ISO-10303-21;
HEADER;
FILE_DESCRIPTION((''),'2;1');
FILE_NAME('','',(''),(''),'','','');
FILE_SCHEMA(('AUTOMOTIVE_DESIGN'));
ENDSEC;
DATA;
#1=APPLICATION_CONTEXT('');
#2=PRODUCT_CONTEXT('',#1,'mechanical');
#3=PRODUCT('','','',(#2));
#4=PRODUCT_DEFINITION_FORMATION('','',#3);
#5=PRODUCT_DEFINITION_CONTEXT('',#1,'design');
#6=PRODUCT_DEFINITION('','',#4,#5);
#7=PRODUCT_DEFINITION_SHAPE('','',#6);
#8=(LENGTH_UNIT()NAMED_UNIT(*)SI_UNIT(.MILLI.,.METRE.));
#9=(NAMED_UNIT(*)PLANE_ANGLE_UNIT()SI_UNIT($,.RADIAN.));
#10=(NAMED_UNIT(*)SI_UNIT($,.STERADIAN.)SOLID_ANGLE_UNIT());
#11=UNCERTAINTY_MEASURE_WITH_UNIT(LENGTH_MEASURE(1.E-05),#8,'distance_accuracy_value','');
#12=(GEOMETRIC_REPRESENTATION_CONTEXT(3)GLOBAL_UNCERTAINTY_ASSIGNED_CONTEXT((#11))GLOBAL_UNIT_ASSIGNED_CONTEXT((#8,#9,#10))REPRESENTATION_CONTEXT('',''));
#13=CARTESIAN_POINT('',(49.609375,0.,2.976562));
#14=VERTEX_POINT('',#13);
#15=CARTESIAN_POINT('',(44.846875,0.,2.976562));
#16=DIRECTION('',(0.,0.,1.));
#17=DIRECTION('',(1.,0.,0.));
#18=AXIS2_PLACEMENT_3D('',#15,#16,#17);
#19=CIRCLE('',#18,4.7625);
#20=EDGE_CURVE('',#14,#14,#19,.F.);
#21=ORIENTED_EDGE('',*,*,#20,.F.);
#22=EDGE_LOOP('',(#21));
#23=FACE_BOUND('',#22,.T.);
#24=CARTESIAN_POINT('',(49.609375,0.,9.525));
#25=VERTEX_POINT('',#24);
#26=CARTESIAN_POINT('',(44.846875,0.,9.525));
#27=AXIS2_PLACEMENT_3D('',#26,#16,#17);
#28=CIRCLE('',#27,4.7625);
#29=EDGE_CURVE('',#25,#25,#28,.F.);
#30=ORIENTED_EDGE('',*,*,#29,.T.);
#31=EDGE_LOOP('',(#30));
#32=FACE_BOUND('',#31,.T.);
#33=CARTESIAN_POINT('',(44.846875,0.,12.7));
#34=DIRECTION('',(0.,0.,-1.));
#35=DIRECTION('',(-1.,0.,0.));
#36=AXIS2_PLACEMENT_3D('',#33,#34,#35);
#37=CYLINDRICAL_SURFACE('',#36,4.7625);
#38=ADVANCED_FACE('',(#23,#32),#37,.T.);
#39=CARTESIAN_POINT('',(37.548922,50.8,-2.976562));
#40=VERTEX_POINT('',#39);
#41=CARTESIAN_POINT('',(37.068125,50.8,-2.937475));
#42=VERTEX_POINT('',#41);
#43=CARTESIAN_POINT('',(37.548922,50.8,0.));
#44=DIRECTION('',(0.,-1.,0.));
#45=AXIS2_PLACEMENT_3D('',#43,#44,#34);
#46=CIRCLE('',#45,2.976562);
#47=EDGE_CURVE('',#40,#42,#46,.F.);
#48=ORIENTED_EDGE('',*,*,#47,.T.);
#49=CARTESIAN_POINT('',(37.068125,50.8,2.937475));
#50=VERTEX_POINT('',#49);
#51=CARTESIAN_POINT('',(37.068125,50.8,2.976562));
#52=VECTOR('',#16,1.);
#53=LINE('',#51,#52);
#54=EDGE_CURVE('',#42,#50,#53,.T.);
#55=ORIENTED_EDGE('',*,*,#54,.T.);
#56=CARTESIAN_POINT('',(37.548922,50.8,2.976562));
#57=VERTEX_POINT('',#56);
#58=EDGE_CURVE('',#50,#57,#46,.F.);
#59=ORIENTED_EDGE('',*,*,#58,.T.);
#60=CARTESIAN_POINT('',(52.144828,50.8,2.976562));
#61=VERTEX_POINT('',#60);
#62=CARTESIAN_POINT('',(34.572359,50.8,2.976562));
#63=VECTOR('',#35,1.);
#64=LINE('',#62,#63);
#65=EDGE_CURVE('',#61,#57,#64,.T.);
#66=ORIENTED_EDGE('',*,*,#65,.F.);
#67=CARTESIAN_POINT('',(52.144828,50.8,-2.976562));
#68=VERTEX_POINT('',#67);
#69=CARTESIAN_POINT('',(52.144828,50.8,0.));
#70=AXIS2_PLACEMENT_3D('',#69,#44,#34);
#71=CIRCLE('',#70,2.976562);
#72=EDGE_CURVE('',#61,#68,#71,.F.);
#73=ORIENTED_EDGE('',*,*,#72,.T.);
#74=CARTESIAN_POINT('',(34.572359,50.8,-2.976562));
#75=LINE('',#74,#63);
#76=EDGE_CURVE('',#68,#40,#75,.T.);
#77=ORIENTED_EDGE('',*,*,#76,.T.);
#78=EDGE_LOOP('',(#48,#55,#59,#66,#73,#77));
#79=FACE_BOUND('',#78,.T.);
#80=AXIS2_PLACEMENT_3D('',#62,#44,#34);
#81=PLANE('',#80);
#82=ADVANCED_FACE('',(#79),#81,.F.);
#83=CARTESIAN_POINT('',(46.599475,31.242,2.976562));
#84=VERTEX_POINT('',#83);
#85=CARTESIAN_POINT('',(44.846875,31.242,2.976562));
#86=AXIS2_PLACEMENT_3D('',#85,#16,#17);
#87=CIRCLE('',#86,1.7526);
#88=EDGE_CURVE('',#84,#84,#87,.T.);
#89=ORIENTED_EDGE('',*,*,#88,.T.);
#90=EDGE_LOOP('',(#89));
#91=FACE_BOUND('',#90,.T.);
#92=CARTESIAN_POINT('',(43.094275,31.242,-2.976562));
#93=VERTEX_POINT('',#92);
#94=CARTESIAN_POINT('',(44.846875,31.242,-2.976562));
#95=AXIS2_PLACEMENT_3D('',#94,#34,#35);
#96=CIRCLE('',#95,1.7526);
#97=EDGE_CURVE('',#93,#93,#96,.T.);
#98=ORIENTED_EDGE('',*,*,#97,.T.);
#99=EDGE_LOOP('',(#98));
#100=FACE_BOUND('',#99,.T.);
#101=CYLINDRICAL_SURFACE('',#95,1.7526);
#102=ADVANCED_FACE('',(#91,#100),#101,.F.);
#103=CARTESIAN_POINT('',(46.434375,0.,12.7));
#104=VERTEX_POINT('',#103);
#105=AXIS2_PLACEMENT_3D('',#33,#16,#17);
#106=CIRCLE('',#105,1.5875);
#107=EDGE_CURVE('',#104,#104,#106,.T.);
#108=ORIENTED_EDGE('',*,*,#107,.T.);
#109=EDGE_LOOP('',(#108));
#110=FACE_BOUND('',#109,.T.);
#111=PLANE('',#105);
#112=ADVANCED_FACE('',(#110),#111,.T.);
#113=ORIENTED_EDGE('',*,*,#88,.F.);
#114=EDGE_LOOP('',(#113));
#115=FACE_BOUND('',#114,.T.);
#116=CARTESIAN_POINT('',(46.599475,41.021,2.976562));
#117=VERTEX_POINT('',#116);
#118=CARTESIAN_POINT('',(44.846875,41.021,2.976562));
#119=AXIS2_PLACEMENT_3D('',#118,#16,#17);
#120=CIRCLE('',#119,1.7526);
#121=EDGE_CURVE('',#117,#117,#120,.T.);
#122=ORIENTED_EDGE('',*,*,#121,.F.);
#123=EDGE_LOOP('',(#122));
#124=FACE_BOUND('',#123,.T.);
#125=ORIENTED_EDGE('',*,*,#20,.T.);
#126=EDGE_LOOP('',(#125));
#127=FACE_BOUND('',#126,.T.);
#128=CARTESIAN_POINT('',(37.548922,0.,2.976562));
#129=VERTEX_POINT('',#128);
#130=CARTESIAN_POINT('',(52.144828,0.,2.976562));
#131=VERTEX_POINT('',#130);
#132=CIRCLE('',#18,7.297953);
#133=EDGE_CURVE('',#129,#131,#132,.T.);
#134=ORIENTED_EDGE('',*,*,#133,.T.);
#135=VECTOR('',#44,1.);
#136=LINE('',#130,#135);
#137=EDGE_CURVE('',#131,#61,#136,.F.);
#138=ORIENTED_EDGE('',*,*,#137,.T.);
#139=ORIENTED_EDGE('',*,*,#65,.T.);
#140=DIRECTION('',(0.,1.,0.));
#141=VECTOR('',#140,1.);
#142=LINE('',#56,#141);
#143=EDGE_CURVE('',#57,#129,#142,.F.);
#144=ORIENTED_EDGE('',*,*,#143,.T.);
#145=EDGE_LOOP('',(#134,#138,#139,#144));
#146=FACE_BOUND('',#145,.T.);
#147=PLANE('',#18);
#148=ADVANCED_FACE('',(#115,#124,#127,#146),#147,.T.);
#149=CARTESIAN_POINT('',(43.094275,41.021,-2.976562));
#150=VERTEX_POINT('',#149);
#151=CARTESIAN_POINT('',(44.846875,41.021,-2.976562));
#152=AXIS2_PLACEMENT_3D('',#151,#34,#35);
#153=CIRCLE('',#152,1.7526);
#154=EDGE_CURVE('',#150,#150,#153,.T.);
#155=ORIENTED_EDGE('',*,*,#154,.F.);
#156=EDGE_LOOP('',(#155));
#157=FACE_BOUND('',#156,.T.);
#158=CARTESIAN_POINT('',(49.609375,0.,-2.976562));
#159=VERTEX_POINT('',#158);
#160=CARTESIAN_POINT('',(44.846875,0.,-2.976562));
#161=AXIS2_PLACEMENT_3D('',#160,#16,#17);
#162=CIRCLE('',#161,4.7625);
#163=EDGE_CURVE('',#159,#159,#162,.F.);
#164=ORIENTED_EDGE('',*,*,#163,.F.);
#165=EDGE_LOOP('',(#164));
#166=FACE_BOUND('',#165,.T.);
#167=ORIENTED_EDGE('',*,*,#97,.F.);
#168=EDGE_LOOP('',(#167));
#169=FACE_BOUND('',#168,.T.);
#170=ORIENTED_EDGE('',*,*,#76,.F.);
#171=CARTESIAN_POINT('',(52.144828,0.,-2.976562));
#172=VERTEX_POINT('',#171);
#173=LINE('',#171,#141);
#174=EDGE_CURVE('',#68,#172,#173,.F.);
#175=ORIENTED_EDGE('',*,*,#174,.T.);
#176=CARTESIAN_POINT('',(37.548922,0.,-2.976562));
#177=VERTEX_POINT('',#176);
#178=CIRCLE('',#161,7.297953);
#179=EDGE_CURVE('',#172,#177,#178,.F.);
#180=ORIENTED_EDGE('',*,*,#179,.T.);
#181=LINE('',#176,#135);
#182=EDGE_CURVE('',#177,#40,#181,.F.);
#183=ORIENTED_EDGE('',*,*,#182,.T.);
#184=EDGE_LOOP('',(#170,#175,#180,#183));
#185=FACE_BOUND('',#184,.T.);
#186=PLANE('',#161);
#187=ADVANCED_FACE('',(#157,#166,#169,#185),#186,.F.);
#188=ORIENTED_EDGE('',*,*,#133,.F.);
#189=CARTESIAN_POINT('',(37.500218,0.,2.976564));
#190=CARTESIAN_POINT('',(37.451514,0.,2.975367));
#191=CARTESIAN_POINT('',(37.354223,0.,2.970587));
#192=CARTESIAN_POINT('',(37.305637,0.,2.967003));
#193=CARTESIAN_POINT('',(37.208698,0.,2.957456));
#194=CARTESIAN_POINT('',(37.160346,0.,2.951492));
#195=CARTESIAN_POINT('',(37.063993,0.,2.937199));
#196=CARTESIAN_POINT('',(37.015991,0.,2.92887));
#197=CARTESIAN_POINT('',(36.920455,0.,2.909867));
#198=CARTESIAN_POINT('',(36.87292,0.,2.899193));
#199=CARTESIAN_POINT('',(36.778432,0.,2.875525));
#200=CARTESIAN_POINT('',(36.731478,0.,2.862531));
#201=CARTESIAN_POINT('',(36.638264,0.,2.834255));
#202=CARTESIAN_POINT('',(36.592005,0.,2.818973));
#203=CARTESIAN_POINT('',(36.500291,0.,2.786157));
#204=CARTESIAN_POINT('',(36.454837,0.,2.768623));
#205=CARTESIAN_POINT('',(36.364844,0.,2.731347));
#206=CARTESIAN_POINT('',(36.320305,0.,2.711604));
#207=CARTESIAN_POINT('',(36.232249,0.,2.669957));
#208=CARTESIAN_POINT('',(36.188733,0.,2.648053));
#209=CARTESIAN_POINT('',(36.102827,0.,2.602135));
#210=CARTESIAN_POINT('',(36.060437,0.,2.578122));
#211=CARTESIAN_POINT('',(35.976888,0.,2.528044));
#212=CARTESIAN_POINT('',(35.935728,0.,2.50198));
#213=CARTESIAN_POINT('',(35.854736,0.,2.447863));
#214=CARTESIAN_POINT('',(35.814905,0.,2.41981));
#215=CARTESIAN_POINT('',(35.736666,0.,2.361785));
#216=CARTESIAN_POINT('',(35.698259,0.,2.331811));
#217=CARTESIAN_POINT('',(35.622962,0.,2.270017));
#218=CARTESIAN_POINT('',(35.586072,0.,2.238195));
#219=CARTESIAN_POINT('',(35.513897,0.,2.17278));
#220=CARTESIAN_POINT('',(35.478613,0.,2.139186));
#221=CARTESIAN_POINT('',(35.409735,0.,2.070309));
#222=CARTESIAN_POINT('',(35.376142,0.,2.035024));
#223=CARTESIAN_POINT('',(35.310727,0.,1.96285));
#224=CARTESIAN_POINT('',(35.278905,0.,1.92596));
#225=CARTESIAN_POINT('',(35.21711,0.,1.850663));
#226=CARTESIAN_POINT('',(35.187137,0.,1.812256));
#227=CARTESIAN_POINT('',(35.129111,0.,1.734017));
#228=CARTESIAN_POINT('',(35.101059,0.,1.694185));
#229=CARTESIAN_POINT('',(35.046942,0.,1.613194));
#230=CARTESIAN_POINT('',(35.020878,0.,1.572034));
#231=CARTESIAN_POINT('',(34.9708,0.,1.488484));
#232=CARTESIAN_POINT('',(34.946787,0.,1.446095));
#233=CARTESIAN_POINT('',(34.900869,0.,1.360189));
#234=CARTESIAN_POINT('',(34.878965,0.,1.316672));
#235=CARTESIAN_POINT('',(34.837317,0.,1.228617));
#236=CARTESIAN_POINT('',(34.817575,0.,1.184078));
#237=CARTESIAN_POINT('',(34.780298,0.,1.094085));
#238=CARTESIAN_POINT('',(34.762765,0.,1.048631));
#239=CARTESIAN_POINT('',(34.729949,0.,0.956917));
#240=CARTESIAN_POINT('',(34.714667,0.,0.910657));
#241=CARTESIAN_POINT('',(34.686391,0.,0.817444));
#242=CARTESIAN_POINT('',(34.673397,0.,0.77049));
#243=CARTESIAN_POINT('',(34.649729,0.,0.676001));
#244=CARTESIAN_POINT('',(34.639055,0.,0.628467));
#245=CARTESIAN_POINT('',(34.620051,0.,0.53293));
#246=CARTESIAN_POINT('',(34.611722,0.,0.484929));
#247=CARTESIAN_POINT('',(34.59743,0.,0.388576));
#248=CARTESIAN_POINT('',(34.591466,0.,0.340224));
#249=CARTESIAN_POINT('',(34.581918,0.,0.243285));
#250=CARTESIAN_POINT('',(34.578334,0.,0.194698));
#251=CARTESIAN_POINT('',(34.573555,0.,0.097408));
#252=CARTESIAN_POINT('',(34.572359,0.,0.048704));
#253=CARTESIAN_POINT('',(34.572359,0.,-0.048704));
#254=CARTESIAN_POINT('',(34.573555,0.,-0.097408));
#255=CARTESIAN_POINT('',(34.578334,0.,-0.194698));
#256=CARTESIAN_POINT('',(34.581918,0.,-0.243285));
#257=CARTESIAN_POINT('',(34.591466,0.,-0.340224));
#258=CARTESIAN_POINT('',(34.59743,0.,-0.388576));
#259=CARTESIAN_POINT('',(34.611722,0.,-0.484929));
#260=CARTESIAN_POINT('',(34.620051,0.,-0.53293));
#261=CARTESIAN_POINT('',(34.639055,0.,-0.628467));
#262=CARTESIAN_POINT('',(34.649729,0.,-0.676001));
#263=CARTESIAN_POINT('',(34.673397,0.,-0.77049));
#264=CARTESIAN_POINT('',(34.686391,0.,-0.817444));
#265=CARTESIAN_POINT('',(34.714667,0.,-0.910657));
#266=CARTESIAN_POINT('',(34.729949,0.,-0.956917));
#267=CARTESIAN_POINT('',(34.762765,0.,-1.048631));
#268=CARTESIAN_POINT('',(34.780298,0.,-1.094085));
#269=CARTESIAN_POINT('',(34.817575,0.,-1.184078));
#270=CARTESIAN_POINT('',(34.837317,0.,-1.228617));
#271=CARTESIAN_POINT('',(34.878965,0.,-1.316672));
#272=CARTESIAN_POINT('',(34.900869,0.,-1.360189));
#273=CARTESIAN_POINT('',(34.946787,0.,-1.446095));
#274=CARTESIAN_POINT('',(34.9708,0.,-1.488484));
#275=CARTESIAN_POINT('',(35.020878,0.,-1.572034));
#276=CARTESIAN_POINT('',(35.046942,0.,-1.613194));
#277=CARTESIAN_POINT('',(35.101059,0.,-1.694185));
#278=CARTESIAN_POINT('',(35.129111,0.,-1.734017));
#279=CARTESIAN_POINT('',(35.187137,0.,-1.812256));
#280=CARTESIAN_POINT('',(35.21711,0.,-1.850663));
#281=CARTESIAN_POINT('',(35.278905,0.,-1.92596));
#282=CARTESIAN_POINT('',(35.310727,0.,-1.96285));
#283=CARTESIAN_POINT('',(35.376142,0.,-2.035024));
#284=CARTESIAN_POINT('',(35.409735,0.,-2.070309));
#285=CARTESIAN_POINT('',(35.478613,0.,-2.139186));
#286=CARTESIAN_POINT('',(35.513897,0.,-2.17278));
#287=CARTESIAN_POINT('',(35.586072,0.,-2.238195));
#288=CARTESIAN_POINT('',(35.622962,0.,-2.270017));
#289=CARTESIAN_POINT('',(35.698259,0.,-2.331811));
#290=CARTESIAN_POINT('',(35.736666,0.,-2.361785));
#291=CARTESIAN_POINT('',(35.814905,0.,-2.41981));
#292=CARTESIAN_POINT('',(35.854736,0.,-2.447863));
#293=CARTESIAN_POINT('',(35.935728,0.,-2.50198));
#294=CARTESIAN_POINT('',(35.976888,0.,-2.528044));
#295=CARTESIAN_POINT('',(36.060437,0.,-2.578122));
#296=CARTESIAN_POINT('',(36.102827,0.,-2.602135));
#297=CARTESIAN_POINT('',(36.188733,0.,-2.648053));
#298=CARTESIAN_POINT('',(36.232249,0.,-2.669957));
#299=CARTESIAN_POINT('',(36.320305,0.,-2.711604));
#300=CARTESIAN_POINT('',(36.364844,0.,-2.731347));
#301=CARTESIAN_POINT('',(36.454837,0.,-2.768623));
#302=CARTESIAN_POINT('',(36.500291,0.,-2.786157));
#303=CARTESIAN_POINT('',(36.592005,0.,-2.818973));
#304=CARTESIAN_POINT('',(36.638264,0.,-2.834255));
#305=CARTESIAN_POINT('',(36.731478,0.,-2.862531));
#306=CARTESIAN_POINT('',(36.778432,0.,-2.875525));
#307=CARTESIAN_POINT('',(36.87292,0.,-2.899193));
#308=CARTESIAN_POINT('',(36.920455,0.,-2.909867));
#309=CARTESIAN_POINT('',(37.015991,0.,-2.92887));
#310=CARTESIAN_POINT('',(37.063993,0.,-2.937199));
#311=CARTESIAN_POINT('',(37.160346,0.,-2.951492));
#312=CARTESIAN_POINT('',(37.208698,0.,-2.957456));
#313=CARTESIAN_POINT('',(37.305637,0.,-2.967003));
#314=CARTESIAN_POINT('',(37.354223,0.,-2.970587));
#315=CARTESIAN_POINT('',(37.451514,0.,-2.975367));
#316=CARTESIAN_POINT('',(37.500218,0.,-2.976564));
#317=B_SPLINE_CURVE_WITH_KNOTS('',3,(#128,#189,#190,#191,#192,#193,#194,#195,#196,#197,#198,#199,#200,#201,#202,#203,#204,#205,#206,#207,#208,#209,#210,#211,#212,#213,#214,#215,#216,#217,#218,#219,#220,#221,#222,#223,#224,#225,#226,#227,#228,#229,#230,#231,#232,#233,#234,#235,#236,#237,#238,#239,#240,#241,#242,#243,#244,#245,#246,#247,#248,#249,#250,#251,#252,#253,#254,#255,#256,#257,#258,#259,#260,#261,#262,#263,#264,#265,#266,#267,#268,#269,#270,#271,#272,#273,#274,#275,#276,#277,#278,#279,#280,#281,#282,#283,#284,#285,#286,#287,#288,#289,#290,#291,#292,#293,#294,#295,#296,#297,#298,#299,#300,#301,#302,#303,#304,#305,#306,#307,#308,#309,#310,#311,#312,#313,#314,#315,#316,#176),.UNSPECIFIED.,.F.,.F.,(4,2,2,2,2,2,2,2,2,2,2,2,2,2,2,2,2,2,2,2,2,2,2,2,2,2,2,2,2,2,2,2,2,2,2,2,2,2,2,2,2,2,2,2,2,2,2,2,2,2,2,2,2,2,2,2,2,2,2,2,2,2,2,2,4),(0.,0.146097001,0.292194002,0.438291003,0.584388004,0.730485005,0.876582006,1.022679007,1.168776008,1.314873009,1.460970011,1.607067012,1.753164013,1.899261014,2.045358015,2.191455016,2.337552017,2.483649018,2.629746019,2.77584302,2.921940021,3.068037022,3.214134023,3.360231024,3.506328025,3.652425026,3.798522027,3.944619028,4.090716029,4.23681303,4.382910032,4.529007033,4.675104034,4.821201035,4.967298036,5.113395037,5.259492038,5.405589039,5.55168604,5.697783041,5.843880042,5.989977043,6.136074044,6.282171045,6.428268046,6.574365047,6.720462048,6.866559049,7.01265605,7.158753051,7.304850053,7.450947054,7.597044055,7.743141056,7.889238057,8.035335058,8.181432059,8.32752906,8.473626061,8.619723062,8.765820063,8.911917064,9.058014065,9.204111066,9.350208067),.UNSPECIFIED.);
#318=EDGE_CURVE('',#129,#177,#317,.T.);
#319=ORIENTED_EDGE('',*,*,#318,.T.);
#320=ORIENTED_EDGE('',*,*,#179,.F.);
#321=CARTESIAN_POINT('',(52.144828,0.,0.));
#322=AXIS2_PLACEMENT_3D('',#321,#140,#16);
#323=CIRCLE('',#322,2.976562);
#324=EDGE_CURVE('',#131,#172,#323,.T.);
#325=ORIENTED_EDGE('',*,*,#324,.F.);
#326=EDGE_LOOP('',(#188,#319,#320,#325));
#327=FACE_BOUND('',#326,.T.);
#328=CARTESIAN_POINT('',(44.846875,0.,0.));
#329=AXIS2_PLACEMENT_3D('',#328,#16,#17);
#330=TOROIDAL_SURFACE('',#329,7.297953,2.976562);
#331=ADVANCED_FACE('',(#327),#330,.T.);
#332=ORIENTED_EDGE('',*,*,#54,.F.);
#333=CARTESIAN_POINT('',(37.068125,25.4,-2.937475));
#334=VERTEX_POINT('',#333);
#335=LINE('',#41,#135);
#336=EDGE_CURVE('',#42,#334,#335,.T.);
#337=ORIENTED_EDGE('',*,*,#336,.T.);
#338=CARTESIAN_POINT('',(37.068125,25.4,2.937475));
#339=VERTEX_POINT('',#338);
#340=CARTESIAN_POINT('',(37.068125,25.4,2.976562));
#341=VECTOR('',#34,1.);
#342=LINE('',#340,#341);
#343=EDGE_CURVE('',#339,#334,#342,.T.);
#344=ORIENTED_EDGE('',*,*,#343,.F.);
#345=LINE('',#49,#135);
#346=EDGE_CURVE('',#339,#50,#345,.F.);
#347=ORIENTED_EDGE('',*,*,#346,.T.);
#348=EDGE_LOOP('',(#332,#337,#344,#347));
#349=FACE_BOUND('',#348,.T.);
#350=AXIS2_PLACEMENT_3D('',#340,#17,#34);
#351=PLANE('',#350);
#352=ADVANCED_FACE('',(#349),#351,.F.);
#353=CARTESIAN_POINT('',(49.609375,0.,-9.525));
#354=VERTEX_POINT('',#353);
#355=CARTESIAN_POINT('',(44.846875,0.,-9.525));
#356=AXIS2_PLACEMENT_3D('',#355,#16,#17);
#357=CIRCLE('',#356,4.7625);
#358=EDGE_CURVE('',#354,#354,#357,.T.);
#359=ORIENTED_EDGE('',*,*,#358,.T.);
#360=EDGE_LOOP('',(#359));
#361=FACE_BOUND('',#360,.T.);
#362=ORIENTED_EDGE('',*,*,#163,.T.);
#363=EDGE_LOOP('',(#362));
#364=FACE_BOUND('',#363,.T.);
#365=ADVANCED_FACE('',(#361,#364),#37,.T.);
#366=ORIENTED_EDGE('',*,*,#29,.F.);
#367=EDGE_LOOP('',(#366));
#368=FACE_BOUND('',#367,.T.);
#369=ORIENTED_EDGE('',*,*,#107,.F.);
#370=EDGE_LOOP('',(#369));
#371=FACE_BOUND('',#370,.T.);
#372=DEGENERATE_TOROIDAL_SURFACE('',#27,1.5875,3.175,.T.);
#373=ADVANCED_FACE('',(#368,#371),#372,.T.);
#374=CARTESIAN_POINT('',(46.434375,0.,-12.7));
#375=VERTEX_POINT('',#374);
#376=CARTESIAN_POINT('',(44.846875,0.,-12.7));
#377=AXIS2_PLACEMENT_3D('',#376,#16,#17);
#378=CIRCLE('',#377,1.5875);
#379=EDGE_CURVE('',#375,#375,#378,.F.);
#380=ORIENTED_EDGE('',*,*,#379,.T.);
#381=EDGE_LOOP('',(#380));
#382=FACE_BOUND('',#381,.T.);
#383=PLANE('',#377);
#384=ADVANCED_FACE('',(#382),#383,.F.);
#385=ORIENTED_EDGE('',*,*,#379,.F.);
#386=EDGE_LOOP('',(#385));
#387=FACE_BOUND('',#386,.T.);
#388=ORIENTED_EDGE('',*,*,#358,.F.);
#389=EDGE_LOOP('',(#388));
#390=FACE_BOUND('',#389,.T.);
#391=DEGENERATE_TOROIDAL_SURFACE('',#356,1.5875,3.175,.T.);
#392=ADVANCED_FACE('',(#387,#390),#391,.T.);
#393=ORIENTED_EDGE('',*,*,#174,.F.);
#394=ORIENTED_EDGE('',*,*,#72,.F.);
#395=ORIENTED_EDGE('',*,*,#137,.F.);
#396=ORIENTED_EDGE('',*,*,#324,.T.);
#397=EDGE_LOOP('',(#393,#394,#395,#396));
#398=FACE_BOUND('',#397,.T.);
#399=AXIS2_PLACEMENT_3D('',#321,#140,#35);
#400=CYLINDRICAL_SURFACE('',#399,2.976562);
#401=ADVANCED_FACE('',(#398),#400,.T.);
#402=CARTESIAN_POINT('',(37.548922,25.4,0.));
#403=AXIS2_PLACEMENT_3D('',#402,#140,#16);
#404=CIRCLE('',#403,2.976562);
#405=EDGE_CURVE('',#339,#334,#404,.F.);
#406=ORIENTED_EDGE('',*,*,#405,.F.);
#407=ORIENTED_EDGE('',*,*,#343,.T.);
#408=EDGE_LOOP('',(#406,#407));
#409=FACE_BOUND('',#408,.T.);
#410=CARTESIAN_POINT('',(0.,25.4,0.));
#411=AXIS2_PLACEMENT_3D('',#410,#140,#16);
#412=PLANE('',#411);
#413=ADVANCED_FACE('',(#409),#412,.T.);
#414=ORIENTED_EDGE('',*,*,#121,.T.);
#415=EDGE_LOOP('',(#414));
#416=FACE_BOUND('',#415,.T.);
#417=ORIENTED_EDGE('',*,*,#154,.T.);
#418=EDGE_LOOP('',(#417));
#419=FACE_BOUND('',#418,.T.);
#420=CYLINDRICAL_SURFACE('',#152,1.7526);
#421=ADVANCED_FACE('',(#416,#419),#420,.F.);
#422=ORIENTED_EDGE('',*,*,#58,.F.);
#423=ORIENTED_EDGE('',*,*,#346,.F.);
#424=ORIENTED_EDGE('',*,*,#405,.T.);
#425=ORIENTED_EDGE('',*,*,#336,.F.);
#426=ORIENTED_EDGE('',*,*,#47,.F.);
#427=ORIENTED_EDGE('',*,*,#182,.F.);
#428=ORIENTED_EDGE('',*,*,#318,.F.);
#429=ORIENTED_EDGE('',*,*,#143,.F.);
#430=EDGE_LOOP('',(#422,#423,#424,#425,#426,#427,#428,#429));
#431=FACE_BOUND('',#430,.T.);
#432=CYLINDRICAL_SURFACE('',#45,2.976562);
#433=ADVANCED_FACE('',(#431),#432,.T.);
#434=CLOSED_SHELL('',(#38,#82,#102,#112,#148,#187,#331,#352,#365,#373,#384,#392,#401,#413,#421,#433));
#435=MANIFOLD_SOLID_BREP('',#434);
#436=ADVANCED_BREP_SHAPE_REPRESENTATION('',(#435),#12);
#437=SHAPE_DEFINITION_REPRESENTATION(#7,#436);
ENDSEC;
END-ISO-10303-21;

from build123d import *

# Parameters (mm, degrees)
SKETCH1_R             = 4.5640625
BOSS_EXTRUDE1_DEPTH   = 2.9765625
SKETCH2_R             = 4.7625
BOSS_EXTRUDE2_DEPTH   = 12.7
FILLET1_R             = 3.175
FILLET2_R             = 2.976563
SKETCH3_W             = 2.495765829
SKETCH3_H             = 5.953125
CUT_EXTRUDE1_DEPTH    = 25.4
F_6_32_TAPPED_HOLE1_D = 3.5052


with BuildPart() as part:
    # Sketch1 → Boss-Extrude1 (new, symmetric)
    with BuildSketch(Plane.XY):
        with BuildLine():
            Line((34.572359171, 0), (34.572359171, 50.8))
            Line((34.572359171, 50.8), (55.121390829, 50.8))
            Line((55.121390829, 50.8), (55.121390829, 0))
            ThreePointArc((55.121390829, 0), (44.846875, -10.274515829), (34.572359171, 0))
        make_face()
        with Locations((44.846875, 0)):
            Circle(SKETCH1_R, mode=Mode.SUBTRACT)
    extrude(amount=BOSS_EXTRUDE1_DEPTH, both=True)

    # Sketch2 → Boss-Extrude2 (add, symmetric)
    with BuildSketch(Plane.XY):
        with Locations((44.846875, 0)):
            Circle(SKETCH2_R)
    extrude(amount=BOSS_EXTRUDE2_DEPTH, both=True)

    # Fillet1
    fillet1_edges = [part.edges().sort_by_distance(p)[0] for p in [
        (40.084375, 0, -12.7),
        (40.084375, 0, 12.7),
    ]]
    fillet(fillet1_edges, radius=FILLET1_R)

    # Fillet2
    fillet2_edges = [part.edges().sort_by_distance(p)[0] for p in [
        (34.572359171, 25.4, 2.9765625),
        (44.846875, -10.274515829, 2.9765625),
        (34.572359171, 25.4, -2.9765625),
        (55.121390829, 25.4, -2.9765625),
        (55.121390829, 25.4, 2.9765625),
    ]]
    fillet(fillet2_edges, radius=FILLET2_R - 0.0001)  # a hair under: the kernel refuses the full size

    # Sketch3 → Cut-Extrude1 (cut)
    with BuildSketch(Plane(origin=(0, 50.8, 0), x_dir=(1, 0, 0), z_dir=(0, 1, 0))):
        with Locations((35.820242085, 0)):
            Rectangle(SKETCH3_W, SKETCH3_H)
    extrude(amount=-CUT_EXTRUDE1_DEPTH, mode=Mode.SUBTRACT)

    # #6-32 Tapped Hole1 (through all)
    with Locations(Plane(origin=(0, 0, -2.9765625), x_dir=(-1, 0, 0), z_dir=(0, 0, -1))):
        with Locations((-44.846875, 41.021), (-44.846875, 31.242)):
            Hole(F_6_32_TAPPED_HOLE1_D / 2)


solid = part.part
